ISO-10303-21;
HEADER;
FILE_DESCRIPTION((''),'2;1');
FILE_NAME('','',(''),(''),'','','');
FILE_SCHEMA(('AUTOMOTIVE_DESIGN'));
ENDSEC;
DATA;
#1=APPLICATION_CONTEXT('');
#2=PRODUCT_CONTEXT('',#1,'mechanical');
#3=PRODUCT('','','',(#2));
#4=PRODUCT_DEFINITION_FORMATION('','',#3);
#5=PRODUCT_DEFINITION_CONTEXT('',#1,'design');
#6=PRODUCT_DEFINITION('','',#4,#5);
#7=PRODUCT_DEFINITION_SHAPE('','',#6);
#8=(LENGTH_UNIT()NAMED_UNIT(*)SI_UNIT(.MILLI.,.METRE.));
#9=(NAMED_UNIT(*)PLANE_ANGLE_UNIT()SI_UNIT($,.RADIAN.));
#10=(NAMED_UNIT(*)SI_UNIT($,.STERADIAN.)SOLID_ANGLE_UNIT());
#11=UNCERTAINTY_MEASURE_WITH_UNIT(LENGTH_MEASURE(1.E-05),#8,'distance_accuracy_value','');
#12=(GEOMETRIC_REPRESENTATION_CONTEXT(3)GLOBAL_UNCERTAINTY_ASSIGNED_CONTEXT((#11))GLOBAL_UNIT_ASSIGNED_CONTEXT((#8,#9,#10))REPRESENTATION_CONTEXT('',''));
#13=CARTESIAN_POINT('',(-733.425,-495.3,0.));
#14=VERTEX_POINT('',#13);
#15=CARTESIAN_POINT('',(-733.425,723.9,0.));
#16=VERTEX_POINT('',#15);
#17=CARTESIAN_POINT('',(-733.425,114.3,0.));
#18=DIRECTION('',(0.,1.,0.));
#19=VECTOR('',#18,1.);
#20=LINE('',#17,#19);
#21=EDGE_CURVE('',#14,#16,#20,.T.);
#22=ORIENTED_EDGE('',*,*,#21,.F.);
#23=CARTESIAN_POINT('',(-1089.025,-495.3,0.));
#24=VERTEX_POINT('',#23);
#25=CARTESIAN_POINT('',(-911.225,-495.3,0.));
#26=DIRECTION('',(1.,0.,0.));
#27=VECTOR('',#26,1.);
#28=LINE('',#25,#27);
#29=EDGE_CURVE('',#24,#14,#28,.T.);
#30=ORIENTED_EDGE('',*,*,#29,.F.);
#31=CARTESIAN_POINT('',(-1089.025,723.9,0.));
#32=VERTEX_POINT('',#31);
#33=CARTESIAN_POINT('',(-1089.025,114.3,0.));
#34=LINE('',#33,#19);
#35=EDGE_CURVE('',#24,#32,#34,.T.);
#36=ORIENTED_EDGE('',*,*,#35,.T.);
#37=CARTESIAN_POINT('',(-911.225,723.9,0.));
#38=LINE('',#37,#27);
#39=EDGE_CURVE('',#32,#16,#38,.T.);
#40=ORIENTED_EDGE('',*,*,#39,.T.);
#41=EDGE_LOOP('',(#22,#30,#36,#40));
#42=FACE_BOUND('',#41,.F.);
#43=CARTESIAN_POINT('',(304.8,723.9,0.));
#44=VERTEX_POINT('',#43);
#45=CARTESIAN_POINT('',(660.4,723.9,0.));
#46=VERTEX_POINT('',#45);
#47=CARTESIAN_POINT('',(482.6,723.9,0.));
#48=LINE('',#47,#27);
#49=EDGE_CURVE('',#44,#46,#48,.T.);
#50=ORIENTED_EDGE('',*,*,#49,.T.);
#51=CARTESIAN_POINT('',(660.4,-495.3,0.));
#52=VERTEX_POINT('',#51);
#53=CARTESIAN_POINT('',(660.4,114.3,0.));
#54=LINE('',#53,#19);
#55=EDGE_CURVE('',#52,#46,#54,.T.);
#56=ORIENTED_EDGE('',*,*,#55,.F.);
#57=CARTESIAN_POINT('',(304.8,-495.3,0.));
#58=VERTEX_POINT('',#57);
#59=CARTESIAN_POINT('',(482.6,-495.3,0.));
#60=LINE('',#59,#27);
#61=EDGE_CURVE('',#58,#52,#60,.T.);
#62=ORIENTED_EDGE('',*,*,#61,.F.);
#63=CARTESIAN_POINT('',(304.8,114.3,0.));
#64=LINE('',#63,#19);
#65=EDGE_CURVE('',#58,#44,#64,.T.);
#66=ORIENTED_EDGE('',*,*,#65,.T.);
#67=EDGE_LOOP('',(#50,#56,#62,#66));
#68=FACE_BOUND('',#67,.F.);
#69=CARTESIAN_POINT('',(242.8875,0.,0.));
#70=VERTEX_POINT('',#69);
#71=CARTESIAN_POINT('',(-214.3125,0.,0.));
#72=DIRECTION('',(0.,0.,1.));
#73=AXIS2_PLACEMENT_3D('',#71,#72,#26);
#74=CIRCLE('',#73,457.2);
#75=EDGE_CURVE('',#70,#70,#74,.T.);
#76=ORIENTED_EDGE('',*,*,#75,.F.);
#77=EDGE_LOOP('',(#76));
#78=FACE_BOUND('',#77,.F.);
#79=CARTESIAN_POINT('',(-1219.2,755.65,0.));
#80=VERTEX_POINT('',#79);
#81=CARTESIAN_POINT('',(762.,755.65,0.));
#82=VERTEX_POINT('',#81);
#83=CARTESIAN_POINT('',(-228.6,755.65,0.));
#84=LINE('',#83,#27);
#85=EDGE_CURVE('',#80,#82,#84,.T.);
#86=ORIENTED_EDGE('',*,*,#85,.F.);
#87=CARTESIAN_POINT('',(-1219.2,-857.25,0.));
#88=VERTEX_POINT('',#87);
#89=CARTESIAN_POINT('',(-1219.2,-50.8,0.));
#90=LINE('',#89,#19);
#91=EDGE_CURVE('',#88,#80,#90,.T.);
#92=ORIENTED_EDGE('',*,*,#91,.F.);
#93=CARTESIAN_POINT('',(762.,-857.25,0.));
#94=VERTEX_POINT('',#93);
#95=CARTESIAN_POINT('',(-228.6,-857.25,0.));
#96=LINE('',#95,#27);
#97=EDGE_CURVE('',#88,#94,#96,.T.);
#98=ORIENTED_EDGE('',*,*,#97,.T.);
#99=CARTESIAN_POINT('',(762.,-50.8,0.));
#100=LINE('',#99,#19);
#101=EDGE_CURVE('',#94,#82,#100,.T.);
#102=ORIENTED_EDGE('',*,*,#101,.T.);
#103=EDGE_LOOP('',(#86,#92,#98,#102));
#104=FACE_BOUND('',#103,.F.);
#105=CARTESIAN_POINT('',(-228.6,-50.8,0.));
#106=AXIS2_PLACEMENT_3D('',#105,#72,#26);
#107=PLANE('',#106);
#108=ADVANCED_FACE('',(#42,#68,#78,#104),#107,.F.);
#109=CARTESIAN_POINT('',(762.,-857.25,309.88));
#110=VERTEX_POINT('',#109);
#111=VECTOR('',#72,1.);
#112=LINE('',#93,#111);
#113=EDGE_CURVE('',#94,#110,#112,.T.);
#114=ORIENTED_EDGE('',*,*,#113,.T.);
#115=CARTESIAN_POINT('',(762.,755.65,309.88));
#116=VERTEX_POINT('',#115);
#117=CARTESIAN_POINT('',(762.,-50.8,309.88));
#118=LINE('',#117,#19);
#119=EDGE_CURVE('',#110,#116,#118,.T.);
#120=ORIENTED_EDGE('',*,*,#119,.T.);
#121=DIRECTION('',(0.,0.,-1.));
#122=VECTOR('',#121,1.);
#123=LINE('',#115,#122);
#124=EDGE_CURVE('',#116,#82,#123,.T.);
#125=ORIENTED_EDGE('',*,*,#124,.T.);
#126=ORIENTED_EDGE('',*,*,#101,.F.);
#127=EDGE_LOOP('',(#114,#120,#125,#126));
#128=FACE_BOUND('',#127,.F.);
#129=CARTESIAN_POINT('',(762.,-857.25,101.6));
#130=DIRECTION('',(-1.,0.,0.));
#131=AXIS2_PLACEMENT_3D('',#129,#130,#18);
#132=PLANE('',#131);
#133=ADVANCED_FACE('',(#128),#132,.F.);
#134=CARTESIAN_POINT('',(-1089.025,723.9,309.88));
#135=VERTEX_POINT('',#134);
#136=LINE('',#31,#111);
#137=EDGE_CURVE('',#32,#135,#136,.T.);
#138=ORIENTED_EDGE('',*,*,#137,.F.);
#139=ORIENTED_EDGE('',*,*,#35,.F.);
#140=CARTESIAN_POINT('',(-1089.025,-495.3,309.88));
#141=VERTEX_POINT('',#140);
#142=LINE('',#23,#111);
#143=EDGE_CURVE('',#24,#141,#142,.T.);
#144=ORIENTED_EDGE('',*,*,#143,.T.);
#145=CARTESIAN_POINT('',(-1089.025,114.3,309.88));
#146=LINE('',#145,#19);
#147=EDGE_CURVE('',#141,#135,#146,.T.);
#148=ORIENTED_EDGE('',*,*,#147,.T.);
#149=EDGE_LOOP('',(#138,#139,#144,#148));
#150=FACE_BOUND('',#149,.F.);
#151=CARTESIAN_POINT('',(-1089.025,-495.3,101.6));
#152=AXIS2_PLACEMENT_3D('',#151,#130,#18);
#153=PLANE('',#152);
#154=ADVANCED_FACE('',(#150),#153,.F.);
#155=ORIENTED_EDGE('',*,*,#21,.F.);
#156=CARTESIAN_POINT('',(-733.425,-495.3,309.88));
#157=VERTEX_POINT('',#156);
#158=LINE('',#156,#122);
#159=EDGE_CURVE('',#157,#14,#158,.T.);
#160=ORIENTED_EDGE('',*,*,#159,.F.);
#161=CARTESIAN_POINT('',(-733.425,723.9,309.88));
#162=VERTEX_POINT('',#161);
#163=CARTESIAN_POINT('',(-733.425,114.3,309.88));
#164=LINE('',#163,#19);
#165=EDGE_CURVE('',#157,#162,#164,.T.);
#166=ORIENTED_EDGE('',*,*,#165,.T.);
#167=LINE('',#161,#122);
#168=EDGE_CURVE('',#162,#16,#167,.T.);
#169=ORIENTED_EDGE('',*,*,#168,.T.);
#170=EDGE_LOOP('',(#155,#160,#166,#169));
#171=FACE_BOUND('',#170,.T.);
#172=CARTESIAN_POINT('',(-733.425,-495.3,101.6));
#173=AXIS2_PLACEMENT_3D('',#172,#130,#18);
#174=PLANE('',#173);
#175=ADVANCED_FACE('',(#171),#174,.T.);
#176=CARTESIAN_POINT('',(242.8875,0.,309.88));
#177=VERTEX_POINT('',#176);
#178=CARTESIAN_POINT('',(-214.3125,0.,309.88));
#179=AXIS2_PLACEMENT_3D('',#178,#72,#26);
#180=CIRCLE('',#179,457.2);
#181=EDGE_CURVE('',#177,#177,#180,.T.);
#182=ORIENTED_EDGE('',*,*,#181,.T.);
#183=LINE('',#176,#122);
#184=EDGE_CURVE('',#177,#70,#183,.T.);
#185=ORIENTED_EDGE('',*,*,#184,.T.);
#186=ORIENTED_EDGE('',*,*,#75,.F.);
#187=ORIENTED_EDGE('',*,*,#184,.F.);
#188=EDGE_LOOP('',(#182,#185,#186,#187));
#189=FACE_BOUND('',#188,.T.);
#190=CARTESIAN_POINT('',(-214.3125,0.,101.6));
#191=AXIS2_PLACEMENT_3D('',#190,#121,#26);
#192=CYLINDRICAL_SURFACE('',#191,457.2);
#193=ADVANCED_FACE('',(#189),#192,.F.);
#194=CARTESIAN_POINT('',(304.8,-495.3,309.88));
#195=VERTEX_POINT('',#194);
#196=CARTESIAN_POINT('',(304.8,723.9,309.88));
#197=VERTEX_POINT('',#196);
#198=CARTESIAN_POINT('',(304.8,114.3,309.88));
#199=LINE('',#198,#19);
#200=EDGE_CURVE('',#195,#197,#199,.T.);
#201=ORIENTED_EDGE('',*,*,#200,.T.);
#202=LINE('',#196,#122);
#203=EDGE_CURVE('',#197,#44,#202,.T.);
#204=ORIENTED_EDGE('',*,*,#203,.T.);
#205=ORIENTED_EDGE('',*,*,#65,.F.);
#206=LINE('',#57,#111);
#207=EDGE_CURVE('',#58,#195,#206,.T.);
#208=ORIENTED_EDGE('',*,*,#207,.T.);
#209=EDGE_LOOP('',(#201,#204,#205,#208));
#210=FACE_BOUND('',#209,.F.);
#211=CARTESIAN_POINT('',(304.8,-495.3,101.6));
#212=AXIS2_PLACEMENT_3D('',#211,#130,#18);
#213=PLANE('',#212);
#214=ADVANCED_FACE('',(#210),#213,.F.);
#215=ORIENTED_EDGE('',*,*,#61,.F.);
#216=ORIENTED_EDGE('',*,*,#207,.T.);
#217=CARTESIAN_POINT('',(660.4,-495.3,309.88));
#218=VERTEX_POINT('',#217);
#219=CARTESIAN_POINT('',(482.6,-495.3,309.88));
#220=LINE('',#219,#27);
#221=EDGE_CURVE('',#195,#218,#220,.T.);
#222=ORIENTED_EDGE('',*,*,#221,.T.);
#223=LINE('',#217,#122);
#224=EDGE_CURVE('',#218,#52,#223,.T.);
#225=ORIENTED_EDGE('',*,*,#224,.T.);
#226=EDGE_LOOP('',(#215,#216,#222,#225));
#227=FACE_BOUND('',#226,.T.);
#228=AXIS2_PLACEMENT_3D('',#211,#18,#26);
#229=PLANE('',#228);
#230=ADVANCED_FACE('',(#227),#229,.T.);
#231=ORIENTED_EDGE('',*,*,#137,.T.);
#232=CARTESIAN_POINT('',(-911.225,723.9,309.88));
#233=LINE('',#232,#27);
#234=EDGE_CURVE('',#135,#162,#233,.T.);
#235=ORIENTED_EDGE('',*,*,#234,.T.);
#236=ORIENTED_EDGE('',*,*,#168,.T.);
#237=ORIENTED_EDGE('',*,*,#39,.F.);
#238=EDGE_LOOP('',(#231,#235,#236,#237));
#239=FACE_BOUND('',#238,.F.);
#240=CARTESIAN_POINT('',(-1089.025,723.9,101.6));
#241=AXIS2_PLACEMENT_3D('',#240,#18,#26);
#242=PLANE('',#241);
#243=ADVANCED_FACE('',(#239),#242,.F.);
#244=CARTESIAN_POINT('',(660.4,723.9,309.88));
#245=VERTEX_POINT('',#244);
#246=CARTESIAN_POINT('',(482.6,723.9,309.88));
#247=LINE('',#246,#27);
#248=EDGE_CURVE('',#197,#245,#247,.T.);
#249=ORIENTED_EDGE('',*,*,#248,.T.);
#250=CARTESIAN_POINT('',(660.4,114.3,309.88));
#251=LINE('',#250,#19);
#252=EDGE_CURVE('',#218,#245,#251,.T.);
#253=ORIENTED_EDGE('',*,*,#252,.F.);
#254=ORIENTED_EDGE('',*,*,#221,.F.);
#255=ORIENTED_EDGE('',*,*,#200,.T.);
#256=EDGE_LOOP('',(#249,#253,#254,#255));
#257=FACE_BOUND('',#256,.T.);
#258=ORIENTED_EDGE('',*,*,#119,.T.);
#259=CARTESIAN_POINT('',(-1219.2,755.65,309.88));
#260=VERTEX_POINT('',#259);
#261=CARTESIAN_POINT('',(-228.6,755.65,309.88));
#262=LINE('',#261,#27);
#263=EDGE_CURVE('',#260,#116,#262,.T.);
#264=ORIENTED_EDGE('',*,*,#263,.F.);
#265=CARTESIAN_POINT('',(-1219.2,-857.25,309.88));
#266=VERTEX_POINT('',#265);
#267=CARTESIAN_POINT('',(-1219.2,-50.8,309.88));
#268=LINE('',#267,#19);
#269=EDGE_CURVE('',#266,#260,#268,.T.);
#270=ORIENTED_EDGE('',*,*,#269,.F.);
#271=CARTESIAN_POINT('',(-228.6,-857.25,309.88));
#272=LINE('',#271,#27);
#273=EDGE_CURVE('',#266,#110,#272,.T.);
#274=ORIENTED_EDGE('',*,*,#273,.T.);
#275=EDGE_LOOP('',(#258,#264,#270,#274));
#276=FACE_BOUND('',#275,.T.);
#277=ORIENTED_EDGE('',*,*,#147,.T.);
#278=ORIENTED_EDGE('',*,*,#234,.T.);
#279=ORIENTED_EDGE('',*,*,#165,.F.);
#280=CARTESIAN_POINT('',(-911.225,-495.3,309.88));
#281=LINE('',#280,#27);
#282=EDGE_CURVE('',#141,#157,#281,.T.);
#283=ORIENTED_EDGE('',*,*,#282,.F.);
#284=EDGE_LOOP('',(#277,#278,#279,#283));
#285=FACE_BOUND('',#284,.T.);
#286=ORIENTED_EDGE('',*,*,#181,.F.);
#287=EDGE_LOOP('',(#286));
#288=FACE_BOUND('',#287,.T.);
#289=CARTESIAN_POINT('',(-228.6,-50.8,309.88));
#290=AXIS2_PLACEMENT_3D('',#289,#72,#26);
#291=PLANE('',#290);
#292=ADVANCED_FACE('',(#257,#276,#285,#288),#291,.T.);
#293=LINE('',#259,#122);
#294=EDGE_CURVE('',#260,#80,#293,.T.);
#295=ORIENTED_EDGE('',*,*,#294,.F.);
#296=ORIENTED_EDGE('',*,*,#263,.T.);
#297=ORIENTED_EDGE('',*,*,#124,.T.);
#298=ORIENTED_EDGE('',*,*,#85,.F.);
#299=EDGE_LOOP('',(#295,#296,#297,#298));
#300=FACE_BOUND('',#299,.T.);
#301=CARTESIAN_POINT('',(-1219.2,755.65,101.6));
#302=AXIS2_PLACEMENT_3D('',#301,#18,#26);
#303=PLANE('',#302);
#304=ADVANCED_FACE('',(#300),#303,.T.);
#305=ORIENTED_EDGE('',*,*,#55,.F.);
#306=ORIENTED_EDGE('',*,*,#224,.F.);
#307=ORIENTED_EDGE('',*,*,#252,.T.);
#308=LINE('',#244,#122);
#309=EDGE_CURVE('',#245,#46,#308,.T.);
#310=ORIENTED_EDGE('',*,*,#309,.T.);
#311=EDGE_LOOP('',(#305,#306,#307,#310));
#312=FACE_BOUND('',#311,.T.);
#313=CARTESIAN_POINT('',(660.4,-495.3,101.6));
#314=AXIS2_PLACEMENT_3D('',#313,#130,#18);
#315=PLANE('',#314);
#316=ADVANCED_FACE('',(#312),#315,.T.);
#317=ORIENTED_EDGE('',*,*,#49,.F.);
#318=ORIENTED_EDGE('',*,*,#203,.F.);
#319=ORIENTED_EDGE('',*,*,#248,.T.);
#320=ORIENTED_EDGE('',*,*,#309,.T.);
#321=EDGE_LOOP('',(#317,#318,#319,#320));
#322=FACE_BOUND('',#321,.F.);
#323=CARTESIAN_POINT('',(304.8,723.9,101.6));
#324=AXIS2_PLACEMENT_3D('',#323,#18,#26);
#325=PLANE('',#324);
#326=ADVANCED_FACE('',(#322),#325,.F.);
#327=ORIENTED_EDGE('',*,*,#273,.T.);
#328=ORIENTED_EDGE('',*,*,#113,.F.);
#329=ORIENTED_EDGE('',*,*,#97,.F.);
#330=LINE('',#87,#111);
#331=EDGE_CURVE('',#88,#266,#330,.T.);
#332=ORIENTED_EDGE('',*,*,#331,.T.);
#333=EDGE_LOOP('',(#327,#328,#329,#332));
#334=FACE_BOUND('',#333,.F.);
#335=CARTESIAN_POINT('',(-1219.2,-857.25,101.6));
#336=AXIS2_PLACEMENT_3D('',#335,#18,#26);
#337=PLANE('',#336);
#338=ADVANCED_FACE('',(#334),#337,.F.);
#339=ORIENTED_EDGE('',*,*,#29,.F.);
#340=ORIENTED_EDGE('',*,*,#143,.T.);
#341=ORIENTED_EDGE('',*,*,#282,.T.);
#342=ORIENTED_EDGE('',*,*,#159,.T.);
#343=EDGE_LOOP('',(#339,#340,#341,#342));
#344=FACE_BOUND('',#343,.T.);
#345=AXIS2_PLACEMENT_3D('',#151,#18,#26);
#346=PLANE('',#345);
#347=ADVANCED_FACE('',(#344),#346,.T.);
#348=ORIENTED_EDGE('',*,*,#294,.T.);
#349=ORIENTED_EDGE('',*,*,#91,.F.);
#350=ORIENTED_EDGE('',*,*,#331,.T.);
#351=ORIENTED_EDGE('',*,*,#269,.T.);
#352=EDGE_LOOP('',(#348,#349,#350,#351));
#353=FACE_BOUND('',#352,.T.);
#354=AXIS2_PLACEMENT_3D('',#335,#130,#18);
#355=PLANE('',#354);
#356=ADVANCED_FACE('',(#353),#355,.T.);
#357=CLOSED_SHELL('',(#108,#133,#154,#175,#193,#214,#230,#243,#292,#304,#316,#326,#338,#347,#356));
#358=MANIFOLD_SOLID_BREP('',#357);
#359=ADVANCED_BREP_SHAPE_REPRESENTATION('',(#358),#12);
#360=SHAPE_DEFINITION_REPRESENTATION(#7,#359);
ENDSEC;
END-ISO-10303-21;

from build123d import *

# Parameters (mm, degrees)
F0_W     = 1981.2
F0_H     = 1612.9
F0_W_2   = 355.6
F0_H_2   = 1219.2
F0_R     = 457.2
F1_DEPTH = 101.6
F2_DEPTH = 208.28


# Not quite as in the source:
# - the program builds the solid bodies; features that only make, move or delete a surface that nothing else refers to are left out


with BuildPart() as f1:
    # F0 (on Top) → F1 (new body)
    with BuildSketch(Plane.XY):
        with Locations((-228.6, -50.8)):
            Rectangle(F0_W, F0_H)
        with Locations((-911.225, 114.3)):
            Rectangle(F0_W_2, F0_H_2, mode=Mode.SUBTRACT)
        with Locations((-214.3125, 0)):
            Circle(F0_R, mode=Mode.SUBTRACT)
        with Locations((482.6, 114.3)):
            Rectangle(F0_W_2, F0_H_2, mode=Mode.SUBTRACT)
    extrude(amount=F1_DEPTH)

    # F2 (add): a face of the model
    f2_faces = [f1.faces().sort_by_distance(p)[0] for p in [
        (736.4527890955, -50.8, 101.6),
    ]]
    extrude(f2_faces, amount=F2_DEPTH)


solid = f1.part
